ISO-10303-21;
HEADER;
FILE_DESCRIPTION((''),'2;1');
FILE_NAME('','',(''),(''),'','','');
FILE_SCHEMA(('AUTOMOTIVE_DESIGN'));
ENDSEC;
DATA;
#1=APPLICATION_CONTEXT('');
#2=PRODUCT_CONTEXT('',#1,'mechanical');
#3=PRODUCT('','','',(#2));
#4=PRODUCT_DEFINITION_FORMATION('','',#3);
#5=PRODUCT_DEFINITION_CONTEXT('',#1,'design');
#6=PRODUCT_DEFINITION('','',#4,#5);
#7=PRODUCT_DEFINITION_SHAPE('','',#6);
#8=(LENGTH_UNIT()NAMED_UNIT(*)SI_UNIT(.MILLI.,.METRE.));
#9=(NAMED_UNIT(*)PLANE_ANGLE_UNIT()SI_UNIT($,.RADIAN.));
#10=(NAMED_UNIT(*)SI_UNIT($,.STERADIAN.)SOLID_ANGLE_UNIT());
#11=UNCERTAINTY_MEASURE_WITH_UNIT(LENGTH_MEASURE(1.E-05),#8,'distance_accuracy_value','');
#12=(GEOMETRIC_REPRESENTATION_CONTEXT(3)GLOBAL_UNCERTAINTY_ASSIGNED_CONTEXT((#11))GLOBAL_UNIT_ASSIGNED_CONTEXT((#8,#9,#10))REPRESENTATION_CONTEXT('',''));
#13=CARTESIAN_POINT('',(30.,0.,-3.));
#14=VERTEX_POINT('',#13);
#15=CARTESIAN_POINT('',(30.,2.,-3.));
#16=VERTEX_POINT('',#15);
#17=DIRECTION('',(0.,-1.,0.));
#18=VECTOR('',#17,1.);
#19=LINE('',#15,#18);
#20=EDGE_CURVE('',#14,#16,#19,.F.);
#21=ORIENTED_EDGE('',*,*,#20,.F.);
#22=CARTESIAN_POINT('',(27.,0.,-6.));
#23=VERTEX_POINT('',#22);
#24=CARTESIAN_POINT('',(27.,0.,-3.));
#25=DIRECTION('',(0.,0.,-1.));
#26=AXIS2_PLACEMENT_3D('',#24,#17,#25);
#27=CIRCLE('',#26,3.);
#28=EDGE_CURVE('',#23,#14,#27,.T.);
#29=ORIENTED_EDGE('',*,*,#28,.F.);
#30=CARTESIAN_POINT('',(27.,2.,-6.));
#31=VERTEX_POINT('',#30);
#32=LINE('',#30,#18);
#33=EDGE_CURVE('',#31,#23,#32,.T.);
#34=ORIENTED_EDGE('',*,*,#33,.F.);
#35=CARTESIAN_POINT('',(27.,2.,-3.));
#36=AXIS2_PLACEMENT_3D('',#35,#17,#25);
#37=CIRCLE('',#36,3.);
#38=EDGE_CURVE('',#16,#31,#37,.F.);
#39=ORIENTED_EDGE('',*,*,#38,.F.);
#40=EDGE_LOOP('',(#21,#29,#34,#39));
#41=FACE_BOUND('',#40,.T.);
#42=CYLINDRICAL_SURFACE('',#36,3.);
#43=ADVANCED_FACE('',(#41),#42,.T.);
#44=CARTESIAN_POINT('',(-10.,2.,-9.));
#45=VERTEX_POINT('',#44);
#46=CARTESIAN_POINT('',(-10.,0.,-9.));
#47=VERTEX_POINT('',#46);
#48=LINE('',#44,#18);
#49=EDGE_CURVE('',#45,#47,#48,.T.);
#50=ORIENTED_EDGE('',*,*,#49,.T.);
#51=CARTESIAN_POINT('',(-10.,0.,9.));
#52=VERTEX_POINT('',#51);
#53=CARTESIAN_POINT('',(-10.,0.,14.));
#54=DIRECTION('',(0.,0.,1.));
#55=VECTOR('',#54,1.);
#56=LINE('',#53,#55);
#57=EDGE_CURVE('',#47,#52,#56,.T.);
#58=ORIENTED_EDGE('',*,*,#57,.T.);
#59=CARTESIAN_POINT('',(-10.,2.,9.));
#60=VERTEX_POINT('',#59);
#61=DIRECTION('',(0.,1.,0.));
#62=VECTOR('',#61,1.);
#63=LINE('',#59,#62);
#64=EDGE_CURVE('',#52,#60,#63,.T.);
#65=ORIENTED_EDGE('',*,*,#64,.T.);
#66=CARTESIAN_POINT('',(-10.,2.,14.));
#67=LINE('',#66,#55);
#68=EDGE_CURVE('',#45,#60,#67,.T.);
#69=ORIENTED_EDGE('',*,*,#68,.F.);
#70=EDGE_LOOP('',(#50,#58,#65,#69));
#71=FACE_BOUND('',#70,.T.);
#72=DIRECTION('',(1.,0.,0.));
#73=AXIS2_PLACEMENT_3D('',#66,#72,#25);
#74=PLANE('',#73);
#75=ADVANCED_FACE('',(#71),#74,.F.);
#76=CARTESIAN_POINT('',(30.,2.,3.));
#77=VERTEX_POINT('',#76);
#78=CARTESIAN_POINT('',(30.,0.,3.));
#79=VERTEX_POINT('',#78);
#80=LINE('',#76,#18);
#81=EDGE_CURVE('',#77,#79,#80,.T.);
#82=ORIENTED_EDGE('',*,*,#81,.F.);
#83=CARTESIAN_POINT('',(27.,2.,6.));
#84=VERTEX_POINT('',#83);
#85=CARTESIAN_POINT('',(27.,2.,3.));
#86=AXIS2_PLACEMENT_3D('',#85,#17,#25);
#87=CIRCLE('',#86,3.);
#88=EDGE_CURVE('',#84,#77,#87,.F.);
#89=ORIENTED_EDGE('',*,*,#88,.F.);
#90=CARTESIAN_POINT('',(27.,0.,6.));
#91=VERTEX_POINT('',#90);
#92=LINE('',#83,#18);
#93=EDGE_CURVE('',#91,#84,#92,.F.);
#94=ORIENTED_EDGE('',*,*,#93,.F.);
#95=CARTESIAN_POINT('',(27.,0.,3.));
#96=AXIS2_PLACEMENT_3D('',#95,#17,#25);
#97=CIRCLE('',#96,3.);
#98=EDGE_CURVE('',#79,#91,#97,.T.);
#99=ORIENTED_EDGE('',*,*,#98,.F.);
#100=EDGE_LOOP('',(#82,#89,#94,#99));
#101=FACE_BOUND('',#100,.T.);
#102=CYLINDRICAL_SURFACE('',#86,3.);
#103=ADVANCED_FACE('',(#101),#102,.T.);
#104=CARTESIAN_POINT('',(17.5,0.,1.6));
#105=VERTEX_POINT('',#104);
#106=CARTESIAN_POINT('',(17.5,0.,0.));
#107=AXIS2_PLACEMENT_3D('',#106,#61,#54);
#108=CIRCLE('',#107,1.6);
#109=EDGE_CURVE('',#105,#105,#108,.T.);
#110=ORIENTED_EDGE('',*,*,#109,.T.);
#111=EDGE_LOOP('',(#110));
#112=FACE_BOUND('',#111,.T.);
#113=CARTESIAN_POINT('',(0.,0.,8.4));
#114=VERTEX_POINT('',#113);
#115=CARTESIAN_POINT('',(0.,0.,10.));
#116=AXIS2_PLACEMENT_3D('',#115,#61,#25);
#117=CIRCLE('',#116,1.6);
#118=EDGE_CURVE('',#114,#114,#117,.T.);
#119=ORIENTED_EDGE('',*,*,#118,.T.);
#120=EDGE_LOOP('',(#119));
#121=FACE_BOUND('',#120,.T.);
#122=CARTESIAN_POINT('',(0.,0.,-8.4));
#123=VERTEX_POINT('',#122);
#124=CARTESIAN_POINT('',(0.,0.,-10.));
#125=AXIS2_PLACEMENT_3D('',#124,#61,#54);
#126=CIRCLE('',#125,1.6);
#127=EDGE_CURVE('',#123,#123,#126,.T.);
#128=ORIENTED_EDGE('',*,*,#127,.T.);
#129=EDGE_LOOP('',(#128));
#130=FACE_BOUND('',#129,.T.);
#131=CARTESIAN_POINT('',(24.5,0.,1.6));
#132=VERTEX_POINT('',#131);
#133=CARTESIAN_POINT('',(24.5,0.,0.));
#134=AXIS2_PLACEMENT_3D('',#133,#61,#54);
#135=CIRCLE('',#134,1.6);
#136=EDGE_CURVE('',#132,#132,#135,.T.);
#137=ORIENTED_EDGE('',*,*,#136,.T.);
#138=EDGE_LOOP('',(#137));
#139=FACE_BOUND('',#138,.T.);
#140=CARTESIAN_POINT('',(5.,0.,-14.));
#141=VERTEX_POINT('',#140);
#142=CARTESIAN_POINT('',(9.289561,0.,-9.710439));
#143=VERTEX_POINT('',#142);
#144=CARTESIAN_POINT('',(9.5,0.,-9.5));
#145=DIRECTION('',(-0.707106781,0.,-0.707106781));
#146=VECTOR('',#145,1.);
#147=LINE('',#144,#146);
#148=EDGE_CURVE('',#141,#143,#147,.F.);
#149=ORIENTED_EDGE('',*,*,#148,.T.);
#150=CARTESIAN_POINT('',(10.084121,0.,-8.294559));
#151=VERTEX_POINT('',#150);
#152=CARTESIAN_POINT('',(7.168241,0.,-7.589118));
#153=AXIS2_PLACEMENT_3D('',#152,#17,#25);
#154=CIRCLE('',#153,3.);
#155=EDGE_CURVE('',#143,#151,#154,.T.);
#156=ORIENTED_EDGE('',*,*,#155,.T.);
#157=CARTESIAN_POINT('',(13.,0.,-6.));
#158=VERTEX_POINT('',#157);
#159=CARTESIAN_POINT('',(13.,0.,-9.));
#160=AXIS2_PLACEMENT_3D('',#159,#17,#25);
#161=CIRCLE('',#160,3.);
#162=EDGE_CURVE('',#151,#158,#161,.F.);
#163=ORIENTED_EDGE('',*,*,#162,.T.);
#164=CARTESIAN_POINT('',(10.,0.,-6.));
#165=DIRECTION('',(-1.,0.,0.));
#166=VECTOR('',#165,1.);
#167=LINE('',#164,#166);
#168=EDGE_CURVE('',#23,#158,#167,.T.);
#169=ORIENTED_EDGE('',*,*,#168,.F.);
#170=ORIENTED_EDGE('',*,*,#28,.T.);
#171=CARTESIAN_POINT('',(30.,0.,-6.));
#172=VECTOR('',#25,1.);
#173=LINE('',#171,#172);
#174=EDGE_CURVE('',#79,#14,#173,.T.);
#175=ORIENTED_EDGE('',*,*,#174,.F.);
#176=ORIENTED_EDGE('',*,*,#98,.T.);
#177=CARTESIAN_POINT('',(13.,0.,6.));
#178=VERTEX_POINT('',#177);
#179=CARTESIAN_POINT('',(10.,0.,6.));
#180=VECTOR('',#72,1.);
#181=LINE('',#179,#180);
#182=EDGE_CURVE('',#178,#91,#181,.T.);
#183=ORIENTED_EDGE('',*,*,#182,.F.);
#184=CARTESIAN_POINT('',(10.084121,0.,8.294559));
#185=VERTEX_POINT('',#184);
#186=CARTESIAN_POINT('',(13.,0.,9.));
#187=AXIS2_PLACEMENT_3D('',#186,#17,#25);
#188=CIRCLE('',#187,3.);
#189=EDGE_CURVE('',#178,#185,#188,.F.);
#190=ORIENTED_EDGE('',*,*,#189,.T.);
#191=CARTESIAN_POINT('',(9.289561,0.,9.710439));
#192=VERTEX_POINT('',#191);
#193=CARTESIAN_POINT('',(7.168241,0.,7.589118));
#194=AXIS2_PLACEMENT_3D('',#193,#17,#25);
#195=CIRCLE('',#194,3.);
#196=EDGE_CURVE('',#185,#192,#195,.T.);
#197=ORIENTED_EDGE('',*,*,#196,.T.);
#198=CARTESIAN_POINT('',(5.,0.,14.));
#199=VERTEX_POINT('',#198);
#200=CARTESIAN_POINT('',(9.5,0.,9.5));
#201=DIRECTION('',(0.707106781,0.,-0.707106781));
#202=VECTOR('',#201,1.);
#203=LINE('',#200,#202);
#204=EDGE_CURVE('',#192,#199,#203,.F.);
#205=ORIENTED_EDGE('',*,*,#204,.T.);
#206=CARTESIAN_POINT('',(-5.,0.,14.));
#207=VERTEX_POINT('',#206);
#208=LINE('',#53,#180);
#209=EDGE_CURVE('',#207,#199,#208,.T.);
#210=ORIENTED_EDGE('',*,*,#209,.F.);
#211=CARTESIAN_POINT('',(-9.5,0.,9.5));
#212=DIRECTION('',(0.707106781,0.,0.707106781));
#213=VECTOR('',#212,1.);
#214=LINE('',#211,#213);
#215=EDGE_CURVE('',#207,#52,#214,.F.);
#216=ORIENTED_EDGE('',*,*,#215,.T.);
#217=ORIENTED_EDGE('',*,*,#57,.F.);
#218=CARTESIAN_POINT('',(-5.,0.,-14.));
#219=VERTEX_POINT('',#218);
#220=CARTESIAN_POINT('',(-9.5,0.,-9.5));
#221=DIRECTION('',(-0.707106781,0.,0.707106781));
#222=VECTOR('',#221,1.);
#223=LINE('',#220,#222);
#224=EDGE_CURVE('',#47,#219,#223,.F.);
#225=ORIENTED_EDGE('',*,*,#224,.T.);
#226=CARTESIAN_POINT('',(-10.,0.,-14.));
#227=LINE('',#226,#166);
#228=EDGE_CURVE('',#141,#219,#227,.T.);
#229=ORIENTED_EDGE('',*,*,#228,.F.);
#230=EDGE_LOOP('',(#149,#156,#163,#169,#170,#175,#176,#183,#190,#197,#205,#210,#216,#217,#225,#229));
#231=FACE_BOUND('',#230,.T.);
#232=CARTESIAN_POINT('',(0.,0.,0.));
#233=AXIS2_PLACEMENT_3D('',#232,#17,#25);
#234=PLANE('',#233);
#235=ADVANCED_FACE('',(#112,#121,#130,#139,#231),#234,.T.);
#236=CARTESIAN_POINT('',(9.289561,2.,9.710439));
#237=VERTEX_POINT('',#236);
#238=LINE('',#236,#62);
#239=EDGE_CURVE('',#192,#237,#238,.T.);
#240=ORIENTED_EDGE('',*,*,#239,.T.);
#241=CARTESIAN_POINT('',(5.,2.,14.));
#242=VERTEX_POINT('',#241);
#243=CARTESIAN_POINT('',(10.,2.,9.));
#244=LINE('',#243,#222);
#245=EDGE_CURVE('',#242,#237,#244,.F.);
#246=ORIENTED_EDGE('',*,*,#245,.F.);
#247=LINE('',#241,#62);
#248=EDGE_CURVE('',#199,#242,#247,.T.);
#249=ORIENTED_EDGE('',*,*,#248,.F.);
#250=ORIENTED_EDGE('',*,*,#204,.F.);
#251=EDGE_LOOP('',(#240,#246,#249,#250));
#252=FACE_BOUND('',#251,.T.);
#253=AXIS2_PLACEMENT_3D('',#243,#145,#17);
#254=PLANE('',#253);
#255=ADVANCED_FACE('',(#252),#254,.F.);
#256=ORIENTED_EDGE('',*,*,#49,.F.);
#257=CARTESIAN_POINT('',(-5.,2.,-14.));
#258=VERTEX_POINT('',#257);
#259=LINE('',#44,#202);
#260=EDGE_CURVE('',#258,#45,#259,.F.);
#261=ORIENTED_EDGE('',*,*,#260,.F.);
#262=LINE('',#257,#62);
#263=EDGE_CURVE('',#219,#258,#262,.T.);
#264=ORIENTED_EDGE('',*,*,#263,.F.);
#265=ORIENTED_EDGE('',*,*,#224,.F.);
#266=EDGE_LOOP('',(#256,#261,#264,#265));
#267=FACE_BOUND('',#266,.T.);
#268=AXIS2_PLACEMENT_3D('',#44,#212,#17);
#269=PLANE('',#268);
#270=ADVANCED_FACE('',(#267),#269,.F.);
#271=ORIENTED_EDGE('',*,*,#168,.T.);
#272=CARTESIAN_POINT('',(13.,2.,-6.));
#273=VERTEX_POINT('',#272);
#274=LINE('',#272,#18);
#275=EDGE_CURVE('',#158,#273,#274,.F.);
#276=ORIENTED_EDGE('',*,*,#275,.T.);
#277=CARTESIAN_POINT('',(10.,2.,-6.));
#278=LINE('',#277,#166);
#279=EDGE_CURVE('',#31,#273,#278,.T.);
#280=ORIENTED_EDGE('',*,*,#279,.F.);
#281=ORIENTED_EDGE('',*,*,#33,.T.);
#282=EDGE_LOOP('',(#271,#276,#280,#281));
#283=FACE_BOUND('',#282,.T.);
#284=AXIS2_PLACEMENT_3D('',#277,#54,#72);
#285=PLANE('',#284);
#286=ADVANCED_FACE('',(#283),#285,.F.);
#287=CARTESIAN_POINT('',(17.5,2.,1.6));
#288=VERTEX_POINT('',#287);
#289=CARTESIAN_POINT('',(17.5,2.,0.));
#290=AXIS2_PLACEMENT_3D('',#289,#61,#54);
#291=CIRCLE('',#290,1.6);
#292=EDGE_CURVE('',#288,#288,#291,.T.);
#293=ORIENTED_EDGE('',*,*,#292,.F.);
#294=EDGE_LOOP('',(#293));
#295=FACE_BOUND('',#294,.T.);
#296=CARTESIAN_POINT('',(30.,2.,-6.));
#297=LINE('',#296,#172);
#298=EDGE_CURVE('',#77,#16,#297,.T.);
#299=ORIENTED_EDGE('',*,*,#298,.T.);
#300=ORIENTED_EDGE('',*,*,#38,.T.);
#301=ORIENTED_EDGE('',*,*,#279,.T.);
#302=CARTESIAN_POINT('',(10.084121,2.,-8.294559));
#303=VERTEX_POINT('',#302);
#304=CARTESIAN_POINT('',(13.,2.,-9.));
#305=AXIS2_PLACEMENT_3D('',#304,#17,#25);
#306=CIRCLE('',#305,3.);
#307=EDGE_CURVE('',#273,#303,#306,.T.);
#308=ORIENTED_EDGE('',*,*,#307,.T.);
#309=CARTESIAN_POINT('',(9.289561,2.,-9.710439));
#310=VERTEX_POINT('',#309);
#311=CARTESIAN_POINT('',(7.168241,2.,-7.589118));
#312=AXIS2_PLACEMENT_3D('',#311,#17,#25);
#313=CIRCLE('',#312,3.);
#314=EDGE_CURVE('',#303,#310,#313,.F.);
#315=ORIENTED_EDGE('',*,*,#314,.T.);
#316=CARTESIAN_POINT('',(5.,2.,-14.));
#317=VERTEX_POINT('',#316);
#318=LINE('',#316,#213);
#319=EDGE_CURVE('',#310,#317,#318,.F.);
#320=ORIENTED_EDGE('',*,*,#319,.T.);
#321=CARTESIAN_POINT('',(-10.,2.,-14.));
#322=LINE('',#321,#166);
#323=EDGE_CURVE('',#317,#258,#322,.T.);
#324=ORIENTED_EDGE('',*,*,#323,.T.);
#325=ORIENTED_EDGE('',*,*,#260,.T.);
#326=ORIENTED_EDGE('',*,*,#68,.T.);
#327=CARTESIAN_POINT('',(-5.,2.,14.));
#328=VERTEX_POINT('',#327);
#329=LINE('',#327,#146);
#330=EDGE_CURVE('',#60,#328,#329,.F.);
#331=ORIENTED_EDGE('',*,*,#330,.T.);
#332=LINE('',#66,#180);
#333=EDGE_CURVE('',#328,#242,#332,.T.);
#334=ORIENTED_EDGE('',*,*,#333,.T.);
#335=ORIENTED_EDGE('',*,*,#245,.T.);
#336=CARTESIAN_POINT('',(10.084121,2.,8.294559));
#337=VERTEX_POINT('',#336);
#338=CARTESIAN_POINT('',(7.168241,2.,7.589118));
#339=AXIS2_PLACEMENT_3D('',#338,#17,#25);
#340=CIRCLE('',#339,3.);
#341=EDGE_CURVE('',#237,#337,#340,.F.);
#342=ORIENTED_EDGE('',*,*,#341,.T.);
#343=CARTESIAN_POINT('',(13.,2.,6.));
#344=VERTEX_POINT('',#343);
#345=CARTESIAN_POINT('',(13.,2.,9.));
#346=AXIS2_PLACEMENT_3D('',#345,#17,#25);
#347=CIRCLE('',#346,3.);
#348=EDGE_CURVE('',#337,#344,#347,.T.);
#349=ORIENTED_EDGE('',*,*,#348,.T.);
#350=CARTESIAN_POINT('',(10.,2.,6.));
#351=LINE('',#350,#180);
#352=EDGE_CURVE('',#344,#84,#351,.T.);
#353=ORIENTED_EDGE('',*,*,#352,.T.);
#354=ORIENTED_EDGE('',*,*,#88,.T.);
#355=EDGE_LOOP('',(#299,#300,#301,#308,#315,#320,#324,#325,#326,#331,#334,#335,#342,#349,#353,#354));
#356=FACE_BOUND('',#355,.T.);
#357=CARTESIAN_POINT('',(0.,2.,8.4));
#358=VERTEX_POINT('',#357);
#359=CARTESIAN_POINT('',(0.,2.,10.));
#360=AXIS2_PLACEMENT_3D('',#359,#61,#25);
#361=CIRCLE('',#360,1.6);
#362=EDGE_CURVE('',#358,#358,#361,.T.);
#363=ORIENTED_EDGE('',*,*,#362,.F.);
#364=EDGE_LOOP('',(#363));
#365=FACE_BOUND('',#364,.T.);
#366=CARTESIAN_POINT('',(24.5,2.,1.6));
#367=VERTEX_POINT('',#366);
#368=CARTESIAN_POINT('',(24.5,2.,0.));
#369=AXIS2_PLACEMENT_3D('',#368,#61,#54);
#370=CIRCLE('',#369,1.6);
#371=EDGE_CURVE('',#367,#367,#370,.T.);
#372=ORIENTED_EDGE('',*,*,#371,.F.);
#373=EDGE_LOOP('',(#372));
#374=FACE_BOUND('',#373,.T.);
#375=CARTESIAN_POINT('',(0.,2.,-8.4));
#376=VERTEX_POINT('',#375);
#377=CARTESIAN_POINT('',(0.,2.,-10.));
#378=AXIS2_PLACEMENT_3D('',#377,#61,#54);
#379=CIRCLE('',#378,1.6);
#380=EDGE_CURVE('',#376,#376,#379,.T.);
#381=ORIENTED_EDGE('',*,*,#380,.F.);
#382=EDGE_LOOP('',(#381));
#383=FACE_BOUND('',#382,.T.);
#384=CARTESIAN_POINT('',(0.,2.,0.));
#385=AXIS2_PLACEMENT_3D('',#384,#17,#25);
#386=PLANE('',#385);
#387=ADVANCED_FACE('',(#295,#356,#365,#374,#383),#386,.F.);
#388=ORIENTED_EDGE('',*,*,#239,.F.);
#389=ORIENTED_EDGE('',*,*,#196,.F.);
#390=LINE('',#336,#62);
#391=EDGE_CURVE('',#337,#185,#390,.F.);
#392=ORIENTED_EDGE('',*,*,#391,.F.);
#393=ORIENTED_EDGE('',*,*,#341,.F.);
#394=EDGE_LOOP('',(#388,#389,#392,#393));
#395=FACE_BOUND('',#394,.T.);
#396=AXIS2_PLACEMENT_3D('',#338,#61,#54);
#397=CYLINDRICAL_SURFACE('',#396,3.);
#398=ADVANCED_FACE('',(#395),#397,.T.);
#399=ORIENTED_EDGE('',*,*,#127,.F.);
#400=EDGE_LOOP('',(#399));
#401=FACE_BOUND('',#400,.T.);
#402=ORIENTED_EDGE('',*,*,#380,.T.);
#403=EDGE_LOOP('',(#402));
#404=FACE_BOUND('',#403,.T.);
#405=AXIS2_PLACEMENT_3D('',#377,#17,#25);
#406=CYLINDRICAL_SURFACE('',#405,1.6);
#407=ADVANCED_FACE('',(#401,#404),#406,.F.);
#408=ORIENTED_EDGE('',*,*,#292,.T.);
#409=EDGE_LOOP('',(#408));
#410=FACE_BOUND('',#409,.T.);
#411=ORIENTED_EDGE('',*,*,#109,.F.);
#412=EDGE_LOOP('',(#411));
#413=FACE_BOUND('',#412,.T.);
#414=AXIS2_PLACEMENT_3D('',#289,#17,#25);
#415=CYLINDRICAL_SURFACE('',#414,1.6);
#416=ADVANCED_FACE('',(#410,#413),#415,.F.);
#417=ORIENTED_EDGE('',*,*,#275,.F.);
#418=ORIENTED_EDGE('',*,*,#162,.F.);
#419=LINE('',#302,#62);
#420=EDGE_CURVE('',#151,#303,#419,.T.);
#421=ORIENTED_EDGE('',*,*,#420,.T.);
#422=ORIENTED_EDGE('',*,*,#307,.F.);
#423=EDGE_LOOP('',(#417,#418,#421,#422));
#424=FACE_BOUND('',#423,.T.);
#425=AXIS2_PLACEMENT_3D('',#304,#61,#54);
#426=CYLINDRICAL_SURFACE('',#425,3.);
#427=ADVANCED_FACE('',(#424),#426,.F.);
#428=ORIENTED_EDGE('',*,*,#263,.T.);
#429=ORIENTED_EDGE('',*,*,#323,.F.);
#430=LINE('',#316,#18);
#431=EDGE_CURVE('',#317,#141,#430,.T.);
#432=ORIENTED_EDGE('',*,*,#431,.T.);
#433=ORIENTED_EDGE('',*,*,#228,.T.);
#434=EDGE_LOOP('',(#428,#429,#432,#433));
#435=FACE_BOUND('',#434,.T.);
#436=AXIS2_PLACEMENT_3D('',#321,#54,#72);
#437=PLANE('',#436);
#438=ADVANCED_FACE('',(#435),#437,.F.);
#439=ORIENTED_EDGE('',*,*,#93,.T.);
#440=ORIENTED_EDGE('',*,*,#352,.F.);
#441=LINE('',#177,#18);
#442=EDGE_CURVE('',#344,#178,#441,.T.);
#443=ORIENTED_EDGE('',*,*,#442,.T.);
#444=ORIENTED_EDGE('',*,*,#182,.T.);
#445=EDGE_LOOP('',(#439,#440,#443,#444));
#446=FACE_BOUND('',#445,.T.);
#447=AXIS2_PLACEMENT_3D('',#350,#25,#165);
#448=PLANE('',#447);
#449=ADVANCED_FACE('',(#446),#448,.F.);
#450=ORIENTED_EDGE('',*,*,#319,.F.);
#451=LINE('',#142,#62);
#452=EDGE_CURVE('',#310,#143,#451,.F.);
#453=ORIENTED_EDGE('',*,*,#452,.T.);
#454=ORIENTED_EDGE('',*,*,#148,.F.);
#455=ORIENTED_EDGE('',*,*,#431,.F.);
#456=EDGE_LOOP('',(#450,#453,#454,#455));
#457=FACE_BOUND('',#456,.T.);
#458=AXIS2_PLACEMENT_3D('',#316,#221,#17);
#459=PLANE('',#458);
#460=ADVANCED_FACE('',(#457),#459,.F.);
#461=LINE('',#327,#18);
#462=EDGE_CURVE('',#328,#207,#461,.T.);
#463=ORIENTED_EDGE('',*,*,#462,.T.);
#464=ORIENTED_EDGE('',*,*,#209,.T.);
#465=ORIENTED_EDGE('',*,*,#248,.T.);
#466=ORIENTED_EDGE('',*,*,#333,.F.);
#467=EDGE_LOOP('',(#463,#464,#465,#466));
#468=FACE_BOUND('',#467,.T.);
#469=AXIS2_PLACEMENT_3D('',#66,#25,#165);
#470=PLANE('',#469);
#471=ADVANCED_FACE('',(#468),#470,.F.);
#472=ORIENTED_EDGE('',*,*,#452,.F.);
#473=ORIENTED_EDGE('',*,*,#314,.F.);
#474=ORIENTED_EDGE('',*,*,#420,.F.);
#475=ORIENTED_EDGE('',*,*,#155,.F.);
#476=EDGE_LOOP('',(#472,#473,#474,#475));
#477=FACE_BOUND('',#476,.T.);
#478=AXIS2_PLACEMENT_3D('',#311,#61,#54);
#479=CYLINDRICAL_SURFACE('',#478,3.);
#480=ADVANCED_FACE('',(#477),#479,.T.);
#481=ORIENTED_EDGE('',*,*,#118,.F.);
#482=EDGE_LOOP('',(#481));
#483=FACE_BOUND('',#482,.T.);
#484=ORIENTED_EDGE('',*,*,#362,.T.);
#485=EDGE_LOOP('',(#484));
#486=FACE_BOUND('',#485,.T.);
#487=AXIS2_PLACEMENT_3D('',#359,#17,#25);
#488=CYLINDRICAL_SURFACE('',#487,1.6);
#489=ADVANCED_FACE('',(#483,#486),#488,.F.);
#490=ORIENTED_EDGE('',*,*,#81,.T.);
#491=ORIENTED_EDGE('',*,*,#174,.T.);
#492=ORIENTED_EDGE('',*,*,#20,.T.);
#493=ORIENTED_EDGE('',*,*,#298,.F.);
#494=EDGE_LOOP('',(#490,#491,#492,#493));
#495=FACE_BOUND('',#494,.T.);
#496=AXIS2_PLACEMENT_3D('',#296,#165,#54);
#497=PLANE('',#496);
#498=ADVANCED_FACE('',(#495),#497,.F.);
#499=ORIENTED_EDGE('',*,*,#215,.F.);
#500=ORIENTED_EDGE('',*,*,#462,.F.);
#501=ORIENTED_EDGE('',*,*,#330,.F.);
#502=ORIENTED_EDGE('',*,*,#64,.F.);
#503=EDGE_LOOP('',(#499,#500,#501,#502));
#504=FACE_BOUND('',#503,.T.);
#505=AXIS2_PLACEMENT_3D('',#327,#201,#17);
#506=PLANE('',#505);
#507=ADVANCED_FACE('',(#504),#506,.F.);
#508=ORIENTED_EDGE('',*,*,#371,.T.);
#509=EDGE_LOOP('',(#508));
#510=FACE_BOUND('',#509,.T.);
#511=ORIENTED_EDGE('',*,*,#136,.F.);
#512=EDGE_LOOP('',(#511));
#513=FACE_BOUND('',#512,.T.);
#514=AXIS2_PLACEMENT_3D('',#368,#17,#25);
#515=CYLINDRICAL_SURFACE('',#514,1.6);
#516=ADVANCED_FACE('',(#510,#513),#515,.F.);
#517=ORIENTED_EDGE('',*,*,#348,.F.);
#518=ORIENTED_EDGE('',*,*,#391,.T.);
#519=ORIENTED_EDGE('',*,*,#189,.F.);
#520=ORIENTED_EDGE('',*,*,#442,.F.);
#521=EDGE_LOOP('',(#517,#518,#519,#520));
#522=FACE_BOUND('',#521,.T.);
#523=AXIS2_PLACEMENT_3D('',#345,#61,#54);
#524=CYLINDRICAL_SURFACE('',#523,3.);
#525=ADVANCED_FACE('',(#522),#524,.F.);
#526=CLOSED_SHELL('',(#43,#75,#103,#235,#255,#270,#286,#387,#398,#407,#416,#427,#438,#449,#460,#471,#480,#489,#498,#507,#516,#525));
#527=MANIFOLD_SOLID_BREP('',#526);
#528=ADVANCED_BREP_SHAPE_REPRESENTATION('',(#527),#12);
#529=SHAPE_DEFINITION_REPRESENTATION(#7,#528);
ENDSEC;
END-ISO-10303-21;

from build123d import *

# Parameters (mm, degrees)
SKETCH_1_R       = 1.6
EXTRUDE_1_DEPTH  = 2
CHAMFER_1_SIZE   = 5
FILLET_START     = -1
FILLET_1_DEPTH   = 4
FILLET_1_2_DEPTH = 2
FILLET_2_R       = 3


with BuildPart() as part:
    # 草图1 → 凸台-拉伸1 (new body)
    with BuildSketch(Plane(origin=(0, 0, 0), x_dir=(1, 0, 0), z_dir=(0, 1, 0))):
        Polygon((-10, -14), (-10, 14), (10, 14), (10, 6), (30, 6), (30, -6), (10, -6), (10, -14), align=None)
        with Locations(Location((0, 10, 0), (0, 0, 270))):
            Circle(SKETCH_1_R, mode=Mode.SUBTRACT)
        with Locations(Location((0, -10, 0), (0, 0, 90))):
            Circle(SKETCH_1_R, mode=Mode.SUBTRACT)
        with Locations(Location((17.5, 0, 0), (0, 0, 270))):
            Circle(SKETCH_1_R, mode=Mode.SUBTRACT)
        with Locations(Location((24.5, 0, 0), (0, 0, 270))):
            Circle(SKETCH_1_R, mode=Mode.SUBTRACT)
    extrude(amount=EXTRUDE_1_DEPTH)

    # 倒角1
    chamfer_1_edges = [part.edges().sort_by_distance(p)[0] for p in [
        (10, 1, 14),
        (-10, 1, 14),
        (-10, 1, -14),
        (10, 1, -14),
    ]]
    chamfer(chamfer_1_edges, length=CHAMFER_1_SIZE)

    # 圆角1: read off the stored shape, not the designer's step
    # 圆角1 outline → 圆角1 (cut)
    with BuildSketch(Plane(origin=(0, 0, 0), x_dir=(1, 0, 0), z_dir=(0, 1, 0)).offset(FILLET_START)):
        with BuildLine():
            ThreePointArc((27, 6), (29.121320344, 5.121320344), (30, 3))
            Line((30, 3), (30, 6))
            Line((30, 6), (27, 6))
        make_face()
        with BuildLine():
            ThreePointArc((30, -3), (29.121320344, -5.121320344), (27, -6))
            Line((27, -6), (30, -6))
            Line((30, -6), (30, -3))
        make_face()
    extrude(amount=FILLET_1_DEPTH, mode=Mode.SUBTRACT)

    # Fillet 1 2 outline → Fillet 1 2 (add)
    with BuildSketch(Plane(origin=(0, 0, 0), x_dir=(1, 0, 0), z_dir=(0, 1, 0))):
        with BuildLine():
            Line((10, 6), (13, 6))
            ThreePointArc((13, 6), (10.878679656, 6.878679656), (10, 9))
            Line((10, 9), (10, 6))
        make_face()
        with BuildLine():
            ThreePointArc((10, -9), (10.878679656, -6.878679656), (13, -6))
            Line((13, -6), (10, -6))
            Line((10, -6), (10, -9))
        make_face()
    extrude(amount=FILLET_1_2_DEPTH)

    # 圆角2
    fillet_2_edges = [part.edges().sort_by_distance(p)[0] for p in [
        (10, 1, 9),
        (10, 1, -9),
    ]]
    fillet(fillet_2_edges, radius=FILLET_2_R)


solid = part.part
